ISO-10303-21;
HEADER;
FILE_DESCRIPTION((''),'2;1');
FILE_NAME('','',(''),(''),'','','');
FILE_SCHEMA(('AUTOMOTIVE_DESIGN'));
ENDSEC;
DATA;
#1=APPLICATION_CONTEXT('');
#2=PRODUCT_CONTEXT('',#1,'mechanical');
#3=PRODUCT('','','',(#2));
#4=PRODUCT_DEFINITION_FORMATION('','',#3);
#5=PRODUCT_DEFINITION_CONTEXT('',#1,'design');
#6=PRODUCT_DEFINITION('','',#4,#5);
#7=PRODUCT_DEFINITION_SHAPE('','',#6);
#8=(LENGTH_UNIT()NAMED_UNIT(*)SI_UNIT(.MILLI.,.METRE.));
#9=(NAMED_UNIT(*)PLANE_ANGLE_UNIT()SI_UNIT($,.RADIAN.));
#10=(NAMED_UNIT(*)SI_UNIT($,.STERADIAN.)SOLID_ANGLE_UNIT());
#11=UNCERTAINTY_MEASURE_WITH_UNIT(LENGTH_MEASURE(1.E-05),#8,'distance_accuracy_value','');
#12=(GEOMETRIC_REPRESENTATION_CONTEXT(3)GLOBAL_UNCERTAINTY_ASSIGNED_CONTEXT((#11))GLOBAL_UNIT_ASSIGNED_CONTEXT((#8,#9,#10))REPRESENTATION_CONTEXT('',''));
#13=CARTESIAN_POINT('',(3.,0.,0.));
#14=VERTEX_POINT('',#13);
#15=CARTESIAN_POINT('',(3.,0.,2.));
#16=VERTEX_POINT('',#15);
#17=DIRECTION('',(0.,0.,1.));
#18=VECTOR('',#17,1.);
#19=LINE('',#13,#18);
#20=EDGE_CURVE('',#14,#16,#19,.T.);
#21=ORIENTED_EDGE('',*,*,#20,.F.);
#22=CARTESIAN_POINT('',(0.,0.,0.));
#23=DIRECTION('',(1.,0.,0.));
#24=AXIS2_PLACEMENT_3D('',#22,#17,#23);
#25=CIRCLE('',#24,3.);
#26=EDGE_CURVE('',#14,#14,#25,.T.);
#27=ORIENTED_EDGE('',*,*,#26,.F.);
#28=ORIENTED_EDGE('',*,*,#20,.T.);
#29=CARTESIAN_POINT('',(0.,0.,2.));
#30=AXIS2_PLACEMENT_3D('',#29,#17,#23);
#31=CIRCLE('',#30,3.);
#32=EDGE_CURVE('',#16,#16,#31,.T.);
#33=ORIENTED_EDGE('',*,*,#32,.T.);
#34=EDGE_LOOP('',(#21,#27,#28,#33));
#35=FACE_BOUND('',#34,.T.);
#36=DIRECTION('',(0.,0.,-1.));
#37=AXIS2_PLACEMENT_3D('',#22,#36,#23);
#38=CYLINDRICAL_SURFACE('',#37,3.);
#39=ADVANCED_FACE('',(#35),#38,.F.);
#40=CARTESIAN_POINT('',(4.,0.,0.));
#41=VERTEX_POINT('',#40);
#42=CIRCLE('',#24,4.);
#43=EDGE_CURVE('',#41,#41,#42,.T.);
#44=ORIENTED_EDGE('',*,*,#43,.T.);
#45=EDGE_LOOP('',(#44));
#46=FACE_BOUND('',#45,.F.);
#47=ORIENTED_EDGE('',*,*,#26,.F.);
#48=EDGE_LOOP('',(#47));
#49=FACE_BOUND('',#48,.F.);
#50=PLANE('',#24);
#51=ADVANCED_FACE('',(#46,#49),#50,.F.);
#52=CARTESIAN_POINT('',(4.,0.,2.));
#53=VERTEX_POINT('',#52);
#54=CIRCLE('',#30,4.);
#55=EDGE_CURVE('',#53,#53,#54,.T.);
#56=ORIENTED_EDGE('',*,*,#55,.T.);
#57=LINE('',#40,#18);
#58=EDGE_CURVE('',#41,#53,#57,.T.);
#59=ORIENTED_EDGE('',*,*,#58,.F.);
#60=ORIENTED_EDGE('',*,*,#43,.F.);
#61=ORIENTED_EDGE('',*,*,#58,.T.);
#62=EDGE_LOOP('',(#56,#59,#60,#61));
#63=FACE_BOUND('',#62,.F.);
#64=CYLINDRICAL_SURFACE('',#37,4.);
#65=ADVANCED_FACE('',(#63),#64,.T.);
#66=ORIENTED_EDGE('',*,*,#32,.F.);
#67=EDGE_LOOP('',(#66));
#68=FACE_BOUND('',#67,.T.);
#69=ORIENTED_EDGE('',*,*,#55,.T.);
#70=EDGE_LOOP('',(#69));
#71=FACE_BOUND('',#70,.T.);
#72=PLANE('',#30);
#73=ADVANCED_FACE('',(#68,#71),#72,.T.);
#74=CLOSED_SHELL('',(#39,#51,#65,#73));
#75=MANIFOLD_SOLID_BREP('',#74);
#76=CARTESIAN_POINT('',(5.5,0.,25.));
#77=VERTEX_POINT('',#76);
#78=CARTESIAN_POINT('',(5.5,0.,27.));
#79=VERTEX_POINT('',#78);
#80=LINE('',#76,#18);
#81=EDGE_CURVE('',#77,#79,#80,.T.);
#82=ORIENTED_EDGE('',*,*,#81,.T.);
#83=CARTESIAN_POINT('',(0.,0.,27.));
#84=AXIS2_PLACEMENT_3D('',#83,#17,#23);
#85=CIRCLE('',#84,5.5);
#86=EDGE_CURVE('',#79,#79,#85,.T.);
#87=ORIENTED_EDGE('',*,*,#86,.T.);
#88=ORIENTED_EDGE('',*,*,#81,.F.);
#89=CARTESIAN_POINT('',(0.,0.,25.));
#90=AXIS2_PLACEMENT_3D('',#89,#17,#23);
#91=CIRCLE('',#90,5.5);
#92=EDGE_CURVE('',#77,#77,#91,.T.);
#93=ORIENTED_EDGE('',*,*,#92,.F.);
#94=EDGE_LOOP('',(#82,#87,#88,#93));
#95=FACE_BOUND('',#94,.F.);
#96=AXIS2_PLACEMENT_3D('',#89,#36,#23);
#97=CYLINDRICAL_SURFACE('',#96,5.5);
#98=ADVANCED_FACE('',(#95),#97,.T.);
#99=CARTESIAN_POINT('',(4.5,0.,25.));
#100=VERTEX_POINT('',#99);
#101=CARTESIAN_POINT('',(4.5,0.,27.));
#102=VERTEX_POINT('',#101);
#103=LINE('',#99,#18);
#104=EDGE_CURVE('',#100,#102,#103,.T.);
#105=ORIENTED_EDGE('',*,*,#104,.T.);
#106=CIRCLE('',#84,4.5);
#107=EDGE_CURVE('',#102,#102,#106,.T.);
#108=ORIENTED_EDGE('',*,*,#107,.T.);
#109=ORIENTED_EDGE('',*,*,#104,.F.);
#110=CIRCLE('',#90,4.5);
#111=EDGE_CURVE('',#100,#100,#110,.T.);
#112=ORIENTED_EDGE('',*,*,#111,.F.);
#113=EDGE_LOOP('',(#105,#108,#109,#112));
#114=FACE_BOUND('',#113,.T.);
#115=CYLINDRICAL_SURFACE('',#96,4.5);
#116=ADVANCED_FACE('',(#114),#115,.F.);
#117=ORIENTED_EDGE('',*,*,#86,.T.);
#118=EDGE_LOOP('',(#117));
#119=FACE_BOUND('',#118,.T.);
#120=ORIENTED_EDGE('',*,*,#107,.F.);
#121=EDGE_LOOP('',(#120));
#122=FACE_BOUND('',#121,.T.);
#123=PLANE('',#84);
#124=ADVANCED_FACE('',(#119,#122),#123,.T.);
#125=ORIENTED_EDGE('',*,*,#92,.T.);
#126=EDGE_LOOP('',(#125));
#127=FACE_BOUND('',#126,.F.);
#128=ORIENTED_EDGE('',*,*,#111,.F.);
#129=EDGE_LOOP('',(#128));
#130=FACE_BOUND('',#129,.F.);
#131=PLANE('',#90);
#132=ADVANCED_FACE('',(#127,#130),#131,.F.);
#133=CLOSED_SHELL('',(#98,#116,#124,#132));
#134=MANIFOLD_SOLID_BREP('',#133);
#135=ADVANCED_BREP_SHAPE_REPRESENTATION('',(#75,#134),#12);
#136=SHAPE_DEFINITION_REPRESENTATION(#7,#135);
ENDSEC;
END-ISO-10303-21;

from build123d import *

# Parameters (mm, degrees)
F0_R     = 4
F0_R_2   = 3
F1_DEPTH = 2
F3_R     = 5.5
F3_R_2   = 4.5
F4_DEPTH = 2


with BuildPart() as f1:
    # F0 (on Top) → F1 (new body)
    with BuildSketch(Plane.XY):
        Circle(F0_R)
        Circle(F0_R_2, mode=Mode.SUBTRACT)
    extrude(amount=F1_DEPTH)


with BuildPart() as f4:
    # F3 (on offset) → F4 (new body)
    with BuildSketch(Plane.XY.offset(25)):
        Circle(F3_R)
        Circle(F3_R_2, mode=Mode.SUBTRACT)
    extrude(amount=F4_DEPTH)


solid = Compound([f1.part, f4.part])
